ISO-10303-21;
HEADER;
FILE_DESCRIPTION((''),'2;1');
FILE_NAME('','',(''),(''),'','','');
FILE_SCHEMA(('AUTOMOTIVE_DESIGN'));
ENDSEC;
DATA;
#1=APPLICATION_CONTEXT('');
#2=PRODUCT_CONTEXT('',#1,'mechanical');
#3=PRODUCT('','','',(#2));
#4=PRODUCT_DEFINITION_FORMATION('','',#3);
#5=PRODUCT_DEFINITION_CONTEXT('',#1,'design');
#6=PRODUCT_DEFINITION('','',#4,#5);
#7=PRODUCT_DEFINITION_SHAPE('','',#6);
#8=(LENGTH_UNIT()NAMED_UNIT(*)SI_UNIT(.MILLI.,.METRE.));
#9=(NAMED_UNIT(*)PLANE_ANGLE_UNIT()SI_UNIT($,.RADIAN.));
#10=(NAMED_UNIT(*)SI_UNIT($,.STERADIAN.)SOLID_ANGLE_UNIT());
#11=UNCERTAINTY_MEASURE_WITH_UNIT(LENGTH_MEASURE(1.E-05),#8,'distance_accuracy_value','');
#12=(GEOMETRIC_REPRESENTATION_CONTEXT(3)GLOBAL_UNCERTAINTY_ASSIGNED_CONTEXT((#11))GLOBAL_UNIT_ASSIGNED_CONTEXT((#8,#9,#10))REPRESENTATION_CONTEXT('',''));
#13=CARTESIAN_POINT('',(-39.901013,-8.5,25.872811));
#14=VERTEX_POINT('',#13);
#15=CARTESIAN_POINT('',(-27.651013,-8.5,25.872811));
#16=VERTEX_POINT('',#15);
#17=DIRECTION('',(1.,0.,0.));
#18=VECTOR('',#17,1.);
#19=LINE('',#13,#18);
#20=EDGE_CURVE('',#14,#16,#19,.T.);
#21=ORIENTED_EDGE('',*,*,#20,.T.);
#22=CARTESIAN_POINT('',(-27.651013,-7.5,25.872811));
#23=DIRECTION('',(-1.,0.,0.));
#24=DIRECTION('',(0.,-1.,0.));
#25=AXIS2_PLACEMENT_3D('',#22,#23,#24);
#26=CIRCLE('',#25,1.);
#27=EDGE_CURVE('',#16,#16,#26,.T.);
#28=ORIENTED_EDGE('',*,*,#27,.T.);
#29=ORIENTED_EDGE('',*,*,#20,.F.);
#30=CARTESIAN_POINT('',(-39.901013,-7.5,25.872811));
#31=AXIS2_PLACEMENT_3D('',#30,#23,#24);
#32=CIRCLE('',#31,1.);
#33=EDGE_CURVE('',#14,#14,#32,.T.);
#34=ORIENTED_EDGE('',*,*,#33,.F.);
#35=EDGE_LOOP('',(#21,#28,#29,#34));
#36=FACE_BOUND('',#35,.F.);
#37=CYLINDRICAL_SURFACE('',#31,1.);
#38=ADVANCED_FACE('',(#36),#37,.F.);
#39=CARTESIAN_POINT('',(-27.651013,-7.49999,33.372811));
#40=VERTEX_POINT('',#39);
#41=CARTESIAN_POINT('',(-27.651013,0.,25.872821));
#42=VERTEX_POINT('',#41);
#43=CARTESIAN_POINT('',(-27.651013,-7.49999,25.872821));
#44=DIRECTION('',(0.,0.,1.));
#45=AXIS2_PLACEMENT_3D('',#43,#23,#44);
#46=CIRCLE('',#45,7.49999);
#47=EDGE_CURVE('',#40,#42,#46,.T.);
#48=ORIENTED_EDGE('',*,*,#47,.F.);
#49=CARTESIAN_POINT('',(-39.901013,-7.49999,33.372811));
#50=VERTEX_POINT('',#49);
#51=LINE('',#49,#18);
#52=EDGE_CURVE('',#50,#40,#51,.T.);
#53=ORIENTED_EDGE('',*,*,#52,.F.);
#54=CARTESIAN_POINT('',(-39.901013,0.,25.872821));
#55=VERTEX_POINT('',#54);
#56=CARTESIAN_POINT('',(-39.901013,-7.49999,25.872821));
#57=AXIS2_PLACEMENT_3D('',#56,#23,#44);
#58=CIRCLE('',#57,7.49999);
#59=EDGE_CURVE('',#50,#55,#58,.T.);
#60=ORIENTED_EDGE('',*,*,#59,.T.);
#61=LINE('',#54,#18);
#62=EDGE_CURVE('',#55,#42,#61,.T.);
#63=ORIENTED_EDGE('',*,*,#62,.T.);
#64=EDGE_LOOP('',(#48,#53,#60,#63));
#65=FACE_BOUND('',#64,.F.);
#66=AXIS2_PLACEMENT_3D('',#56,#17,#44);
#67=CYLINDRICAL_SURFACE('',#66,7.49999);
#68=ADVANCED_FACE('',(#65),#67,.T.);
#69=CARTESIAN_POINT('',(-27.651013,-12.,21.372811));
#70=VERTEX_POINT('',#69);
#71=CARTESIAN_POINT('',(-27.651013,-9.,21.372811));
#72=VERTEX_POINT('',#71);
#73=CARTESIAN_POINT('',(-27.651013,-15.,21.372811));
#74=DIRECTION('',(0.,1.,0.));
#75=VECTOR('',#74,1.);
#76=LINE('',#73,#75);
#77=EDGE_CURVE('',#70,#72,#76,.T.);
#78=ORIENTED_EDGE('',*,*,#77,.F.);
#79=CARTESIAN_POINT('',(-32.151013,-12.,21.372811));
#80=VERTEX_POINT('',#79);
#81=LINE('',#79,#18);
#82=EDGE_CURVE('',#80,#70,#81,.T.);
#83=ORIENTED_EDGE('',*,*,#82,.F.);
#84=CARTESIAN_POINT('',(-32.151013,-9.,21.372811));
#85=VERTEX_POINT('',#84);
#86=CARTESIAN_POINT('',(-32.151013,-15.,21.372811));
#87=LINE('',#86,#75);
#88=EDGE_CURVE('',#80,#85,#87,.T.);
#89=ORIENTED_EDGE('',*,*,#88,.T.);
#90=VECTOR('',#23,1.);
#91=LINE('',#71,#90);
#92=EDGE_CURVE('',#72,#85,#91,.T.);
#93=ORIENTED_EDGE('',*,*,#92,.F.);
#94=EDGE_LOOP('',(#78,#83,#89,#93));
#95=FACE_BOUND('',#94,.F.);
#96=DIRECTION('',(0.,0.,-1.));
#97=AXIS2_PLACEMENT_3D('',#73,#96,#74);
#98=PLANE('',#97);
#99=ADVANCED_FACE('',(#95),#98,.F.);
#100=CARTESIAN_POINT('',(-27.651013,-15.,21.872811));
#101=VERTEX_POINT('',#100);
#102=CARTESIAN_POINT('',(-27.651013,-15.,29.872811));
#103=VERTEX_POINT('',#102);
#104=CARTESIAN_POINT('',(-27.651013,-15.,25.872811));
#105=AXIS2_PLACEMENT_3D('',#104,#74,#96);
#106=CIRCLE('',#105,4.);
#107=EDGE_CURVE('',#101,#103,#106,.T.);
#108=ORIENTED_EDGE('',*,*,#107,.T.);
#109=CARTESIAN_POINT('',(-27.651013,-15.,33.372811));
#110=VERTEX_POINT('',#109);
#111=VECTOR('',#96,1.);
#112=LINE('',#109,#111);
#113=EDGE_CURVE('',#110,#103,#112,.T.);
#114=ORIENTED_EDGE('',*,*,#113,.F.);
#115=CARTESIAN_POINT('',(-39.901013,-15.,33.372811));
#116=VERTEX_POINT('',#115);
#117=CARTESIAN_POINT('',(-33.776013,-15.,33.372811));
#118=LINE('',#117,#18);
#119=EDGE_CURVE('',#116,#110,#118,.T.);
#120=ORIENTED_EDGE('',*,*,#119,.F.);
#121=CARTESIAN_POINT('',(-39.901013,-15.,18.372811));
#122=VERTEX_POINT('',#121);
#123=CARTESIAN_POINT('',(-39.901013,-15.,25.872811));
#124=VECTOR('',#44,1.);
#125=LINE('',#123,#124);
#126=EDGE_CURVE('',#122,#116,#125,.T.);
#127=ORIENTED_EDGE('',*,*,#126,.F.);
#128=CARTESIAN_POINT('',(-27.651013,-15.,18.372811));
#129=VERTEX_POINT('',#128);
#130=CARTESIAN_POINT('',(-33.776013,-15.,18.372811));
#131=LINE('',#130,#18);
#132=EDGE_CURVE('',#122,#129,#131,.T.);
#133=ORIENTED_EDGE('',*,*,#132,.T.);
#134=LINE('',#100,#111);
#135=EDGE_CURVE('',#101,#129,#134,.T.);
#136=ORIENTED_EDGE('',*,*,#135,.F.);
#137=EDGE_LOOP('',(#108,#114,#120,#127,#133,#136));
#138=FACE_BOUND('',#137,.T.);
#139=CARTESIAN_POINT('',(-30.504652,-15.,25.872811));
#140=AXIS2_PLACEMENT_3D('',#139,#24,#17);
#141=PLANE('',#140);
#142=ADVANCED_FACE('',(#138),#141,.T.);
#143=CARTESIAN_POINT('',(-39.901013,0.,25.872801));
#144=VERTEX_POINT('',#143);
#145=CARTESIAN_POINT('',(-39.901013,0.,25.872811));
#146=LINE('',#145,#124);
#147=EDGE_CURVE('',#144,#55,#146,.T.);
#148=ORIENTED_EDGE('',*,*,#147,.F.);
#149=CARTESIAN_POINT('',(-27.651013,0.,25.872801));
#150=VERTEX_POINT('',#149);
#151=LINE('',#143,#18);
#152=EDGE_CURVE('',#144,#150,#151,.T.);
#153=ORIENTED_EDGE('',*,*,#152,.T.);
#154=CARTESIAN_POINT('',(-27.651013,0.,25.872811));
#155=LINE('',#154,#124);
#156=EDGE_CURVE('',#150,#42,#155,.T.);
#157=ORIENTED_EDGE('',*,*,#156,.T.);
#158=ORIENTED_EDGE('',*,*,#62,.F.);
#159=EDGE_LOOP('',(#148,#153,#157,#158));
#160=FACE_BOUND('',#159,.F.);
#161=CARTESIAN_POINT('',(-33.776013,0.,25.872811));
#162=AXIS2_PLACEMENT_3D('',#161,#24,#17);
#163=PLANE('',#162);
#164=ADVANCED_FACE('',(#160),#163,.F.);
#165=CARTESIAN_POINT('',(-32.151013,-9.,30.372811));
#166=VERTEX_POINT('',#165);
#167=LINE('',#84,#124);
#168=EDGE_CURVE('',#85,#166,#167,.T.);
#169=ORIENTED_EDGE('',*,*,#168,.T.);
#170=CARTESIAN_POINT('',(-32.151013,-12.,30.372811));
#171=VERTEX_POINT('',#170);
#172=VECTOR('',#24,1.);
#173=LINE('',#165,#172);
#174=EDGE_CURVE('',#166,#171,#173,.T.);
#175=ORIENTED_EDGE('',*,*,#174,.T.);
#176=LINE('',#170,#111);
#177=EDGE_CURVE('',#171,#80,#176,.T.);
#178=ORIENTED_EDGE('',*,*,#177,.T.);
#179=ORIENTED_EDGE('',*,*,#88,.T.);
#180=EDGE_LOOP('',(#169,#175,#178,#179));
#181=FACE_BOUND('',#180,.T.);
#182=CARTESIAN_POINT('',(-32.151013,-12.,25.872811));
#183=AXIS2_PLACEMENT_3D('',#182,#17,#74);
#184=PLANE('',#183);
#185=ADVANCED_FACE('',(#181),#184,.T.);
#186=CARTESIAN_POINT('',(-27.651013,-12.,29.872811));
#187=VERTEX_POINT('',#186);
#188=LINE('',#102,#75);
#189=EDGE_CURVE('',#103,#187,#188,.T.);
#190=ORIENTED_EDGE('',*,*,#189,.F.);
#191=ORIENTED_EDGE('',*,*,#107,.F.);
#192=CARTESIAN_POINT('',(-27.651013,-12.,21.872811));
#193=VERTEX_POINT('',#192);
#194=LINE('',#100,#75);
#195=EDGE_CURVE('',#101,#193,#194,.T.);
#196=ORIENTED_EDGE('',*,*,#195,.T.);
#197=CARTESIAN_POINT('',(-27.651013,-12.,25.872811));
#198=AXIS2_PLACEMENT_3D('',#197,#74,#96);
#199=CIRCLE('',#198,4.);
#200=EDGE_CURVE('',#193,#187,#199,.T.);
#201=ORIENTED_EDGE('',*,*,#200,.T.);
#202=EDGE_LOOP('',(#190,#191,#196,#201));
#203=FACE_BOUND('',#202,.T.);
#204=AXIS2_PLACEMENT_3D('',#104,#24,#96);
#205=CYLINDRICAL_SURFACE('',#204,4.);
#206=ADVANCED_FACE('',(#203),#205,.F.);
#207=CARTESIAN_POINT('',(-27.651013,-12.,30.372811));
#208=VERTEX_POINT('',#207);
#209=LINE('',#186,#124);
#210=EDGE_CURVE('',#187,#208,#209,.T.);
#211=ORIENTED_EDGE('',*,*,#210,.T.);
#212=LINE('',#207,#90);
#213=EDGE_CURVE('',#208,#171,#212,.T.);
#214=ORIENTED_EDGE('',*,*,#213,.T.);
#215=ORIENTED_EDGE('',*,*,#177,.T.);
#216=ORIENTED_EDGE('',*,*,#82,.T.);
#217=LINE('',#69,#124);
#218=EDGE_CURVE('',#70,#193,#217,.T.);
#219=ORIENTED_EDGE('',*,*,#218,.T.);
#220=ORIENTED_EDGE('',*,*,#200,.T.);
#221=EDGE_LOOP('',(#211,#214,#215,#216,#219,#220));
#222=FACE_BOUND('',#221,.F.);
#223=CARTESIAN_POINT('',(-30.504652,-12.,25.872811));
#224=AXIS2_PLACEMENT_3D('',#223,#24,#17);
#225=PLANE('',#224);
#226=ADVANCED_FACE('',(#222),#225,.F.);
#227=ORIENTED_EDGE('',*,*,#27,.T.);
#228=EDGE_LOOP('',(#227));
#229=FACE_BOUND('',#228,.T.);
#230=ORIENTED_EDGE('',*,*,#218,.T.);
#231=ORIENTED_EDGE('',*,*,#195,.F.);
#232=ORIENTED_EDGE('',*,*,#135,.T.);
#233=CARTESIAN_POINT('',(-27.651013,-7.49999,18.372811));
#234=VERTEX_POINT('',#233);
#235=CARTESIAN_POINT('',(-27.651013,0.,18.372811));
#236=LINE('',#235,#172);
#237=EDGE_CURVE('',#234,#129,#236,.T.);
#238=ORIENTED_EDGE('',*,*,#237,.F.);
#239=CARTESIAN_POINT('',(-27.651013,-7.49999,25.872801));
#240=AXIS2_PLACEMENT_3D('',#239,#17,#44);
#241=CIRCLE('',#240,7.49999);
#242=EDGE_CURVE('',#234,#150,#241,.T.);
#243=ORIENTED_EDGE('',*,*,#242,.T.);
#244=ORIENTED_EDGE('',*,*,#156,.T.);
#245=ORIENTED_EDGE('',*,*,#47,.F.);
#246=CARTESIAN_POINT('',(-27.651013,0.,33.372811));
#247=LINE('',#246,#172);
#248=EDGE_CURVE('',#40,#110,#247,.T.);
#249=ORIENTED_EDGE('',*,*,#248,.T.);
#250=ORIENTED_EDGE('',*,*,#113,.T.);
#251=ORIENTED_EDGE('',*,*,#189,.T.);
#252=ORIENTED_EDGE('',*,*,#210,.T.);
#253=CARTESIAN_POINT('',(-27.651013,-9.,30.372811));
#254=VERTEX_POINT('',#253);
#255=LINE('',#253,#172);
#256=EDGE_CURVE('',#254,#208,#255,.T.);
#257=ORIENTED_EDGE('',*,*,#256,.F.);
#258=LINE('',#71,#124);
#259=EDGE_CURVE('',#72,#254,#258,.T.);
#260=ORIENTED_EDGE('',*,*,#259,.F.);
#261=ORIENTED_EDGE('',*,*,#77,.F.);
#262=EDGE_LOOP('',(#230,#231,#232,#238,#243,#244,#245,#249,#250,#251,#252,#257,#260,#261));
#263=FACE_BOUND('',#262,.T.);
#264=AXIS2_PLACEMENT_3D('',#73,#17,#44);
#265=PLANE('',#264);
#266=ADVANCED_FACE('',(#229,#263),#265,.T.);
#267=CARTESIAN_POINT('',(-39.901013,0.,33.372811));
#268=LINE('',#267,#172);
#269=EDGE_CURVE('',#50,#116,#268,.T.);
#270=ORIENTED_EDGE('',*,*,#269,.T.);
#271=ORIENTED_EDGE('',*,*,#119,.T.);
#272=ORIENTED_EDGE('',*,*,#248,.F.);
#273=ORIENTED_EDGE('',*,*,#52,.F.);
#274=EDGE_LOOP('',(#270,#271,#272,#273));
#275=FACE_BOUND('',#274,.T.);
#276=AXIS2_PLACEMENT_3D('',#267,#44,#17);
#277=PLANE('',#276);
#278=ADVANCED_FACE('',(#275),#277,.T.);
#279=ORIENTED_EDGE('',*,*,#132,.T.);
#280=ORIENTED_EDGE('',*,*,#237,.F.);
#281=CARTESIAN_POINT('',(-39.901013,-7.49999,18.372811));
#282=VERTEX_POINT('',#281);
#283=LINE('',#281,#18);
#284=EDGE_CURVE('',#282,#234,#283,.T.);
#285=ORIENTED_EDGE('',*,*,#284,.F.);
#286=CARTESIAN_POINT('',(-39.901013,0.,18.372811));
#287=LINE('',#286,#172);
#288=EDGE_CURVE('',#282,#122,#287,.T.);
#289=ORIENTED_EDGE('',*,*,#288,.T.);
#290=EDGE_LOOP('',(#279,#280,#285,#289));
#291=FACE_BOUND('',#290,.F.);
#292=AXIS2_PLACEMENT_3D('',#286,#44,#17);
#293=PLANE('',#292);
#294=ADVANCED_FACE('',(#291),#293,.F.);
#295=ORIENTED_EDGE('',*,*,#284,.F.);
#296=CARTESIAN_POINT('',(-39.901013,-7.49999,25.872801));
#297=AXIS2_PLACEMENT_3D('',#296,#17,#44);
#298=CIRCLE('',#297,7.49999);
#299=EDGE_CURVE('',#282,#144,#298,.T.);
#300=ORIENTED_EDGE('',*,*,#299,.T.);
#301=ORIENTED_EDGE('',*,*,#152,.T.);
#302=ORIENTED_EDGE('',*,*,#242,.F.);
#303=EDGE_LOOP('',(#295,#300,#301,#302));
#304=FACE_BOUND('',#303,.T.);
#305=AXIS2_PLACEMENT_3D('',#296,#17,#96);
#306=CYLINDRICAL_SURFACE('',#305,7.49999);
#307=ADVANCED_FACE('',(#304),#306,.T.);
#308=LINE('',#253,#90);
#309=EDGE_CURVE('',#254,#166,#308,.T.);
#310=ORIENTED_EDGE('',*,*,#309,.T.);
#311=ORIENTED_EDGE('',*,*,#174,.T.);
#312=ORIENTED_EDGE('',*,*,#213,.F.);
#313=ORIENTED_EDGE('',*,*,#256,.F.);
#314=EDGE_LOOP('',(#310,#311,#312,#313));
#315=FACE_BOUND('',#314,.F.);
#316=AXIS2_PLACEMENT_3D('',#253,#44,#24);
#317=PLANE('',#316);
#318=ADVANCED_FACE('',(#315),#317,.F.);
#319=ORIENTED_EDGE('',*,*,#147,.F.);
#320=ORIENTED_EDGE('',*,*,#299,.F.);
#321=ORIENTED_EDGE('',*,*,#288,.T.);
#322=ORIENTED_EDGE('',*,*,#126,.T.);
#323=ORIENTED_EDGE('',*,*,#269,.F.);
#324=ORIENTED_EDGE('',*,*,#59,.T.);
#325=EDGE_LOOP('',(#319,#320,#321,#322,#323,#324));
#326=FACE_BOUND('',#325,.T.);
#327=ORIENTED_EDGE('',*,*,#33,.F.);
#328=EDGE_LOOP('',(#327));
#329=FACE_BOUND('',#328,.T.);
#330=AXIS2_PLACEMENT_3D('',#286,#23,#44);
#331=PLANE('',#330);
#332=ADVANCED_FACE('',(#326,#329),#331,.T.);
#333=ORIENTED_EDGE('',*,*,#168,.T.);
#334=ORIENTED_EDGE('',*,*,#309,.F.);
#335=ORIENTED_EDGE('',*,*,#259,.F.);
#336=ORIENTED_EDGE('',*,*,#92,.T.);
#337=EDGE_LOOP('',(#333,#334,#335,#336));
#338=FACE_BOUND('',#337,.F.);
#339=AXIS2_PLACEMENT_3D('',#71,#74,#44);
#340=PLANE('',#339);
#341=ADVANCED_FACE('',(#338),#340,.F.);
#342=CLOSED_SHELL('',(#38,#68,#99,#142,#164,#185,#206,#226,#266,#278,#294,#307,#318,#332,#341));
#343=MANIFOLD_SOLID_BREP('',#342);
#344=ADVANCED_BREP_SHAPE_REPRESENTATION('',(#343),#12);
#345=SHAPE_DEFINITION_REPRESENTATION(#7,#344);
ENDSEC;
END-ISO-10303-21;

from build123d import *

# Parameters (mm, degrees)
F0_W     = 12.25
F0_H     = 15
F1_DEPTH = 15
F2_R     = 7.49999
F3_R     = 1
F4_DEPTH = 25
F6_DEPTH = 4.5
F8_DEPTH = 3


# Not quite as in the source:
# - a fillet or chamfer is up to 0.001 mm smaller than in the source, because OpenCascade refuses the exact size


with BuildPart() as f1:
    # F0 (on Front) → F1 (new body)
    with BuildSketch(Plane.XZ):
        with Locations((-33.7760131806, 25.872811313)):
            Rectangle(F0_W, F0_H)
    extrude(amount=F1_DEPTH)

    # F2 (radius 7.5 in the source; OpenCascade refuses exactly that, so slightly less here)
    f2_edges = [f1.edges().sort_by_distance(p)[0] for p in [
        (-33.776013, 0, 18.372811),
        (-33.776013, 0, 33.372811),
    ]]
    fillet(f2_edges, radius=F2_R)

    # F3 (on face) → F4 (cut)
    with BuildSketch(Plane(origin=(-39.9010131806, 0, 0), x_dir=(0, -1, 0), z_dir=(-1, 0, 0))):
        with Locations((7.5, 25.872811313)):
            Circle(F3_R)
    extrude(amount=-F4_DEPTH, mode=Mode.SUBTRACT)

    # F5 (on face) → F6 (cut)
    with BuildSketch(Plane.YZ.offset(-27.6510131806)):
        Polygon((-9, 30.372811313), (-15, 30.372811313), (-15, 21.372811313), (-9, 21.372811313), (-9, 25.872811313), align=None)
    extrude(amount=-F6_DEPTH, mode=Mode.SUBTRACT)

    # F7 (on face) → F8 (join)
    with BuildSketch(Plane.XZ.offset(15)):
        with BuildLine():
            Line((-27.6510131806, 30.372811313), (-32.1510131806, 30.372811313))
            Line((-32.1510131806, 30.372811313), (-32.1510131806, 21.372811313))
            Line((-32.1510131806, 21.372811313), (-27.6510131806, 21.372811313))
            Line((-27.6510131806, 21.372811313), (-27.6510131806, 21.872811313))
            ThreePointArc((-27.6510131806, 21.872811313), (-31.6510131806, 25.872811313), (-27.6510131806, 29.872811313))
            Line((-27.6510131806, 29.872811313), (-27.6510131806, 30.372811313))
        make_face()
    extrude(amount=-F8_DEPTH)


solid = f1.part
